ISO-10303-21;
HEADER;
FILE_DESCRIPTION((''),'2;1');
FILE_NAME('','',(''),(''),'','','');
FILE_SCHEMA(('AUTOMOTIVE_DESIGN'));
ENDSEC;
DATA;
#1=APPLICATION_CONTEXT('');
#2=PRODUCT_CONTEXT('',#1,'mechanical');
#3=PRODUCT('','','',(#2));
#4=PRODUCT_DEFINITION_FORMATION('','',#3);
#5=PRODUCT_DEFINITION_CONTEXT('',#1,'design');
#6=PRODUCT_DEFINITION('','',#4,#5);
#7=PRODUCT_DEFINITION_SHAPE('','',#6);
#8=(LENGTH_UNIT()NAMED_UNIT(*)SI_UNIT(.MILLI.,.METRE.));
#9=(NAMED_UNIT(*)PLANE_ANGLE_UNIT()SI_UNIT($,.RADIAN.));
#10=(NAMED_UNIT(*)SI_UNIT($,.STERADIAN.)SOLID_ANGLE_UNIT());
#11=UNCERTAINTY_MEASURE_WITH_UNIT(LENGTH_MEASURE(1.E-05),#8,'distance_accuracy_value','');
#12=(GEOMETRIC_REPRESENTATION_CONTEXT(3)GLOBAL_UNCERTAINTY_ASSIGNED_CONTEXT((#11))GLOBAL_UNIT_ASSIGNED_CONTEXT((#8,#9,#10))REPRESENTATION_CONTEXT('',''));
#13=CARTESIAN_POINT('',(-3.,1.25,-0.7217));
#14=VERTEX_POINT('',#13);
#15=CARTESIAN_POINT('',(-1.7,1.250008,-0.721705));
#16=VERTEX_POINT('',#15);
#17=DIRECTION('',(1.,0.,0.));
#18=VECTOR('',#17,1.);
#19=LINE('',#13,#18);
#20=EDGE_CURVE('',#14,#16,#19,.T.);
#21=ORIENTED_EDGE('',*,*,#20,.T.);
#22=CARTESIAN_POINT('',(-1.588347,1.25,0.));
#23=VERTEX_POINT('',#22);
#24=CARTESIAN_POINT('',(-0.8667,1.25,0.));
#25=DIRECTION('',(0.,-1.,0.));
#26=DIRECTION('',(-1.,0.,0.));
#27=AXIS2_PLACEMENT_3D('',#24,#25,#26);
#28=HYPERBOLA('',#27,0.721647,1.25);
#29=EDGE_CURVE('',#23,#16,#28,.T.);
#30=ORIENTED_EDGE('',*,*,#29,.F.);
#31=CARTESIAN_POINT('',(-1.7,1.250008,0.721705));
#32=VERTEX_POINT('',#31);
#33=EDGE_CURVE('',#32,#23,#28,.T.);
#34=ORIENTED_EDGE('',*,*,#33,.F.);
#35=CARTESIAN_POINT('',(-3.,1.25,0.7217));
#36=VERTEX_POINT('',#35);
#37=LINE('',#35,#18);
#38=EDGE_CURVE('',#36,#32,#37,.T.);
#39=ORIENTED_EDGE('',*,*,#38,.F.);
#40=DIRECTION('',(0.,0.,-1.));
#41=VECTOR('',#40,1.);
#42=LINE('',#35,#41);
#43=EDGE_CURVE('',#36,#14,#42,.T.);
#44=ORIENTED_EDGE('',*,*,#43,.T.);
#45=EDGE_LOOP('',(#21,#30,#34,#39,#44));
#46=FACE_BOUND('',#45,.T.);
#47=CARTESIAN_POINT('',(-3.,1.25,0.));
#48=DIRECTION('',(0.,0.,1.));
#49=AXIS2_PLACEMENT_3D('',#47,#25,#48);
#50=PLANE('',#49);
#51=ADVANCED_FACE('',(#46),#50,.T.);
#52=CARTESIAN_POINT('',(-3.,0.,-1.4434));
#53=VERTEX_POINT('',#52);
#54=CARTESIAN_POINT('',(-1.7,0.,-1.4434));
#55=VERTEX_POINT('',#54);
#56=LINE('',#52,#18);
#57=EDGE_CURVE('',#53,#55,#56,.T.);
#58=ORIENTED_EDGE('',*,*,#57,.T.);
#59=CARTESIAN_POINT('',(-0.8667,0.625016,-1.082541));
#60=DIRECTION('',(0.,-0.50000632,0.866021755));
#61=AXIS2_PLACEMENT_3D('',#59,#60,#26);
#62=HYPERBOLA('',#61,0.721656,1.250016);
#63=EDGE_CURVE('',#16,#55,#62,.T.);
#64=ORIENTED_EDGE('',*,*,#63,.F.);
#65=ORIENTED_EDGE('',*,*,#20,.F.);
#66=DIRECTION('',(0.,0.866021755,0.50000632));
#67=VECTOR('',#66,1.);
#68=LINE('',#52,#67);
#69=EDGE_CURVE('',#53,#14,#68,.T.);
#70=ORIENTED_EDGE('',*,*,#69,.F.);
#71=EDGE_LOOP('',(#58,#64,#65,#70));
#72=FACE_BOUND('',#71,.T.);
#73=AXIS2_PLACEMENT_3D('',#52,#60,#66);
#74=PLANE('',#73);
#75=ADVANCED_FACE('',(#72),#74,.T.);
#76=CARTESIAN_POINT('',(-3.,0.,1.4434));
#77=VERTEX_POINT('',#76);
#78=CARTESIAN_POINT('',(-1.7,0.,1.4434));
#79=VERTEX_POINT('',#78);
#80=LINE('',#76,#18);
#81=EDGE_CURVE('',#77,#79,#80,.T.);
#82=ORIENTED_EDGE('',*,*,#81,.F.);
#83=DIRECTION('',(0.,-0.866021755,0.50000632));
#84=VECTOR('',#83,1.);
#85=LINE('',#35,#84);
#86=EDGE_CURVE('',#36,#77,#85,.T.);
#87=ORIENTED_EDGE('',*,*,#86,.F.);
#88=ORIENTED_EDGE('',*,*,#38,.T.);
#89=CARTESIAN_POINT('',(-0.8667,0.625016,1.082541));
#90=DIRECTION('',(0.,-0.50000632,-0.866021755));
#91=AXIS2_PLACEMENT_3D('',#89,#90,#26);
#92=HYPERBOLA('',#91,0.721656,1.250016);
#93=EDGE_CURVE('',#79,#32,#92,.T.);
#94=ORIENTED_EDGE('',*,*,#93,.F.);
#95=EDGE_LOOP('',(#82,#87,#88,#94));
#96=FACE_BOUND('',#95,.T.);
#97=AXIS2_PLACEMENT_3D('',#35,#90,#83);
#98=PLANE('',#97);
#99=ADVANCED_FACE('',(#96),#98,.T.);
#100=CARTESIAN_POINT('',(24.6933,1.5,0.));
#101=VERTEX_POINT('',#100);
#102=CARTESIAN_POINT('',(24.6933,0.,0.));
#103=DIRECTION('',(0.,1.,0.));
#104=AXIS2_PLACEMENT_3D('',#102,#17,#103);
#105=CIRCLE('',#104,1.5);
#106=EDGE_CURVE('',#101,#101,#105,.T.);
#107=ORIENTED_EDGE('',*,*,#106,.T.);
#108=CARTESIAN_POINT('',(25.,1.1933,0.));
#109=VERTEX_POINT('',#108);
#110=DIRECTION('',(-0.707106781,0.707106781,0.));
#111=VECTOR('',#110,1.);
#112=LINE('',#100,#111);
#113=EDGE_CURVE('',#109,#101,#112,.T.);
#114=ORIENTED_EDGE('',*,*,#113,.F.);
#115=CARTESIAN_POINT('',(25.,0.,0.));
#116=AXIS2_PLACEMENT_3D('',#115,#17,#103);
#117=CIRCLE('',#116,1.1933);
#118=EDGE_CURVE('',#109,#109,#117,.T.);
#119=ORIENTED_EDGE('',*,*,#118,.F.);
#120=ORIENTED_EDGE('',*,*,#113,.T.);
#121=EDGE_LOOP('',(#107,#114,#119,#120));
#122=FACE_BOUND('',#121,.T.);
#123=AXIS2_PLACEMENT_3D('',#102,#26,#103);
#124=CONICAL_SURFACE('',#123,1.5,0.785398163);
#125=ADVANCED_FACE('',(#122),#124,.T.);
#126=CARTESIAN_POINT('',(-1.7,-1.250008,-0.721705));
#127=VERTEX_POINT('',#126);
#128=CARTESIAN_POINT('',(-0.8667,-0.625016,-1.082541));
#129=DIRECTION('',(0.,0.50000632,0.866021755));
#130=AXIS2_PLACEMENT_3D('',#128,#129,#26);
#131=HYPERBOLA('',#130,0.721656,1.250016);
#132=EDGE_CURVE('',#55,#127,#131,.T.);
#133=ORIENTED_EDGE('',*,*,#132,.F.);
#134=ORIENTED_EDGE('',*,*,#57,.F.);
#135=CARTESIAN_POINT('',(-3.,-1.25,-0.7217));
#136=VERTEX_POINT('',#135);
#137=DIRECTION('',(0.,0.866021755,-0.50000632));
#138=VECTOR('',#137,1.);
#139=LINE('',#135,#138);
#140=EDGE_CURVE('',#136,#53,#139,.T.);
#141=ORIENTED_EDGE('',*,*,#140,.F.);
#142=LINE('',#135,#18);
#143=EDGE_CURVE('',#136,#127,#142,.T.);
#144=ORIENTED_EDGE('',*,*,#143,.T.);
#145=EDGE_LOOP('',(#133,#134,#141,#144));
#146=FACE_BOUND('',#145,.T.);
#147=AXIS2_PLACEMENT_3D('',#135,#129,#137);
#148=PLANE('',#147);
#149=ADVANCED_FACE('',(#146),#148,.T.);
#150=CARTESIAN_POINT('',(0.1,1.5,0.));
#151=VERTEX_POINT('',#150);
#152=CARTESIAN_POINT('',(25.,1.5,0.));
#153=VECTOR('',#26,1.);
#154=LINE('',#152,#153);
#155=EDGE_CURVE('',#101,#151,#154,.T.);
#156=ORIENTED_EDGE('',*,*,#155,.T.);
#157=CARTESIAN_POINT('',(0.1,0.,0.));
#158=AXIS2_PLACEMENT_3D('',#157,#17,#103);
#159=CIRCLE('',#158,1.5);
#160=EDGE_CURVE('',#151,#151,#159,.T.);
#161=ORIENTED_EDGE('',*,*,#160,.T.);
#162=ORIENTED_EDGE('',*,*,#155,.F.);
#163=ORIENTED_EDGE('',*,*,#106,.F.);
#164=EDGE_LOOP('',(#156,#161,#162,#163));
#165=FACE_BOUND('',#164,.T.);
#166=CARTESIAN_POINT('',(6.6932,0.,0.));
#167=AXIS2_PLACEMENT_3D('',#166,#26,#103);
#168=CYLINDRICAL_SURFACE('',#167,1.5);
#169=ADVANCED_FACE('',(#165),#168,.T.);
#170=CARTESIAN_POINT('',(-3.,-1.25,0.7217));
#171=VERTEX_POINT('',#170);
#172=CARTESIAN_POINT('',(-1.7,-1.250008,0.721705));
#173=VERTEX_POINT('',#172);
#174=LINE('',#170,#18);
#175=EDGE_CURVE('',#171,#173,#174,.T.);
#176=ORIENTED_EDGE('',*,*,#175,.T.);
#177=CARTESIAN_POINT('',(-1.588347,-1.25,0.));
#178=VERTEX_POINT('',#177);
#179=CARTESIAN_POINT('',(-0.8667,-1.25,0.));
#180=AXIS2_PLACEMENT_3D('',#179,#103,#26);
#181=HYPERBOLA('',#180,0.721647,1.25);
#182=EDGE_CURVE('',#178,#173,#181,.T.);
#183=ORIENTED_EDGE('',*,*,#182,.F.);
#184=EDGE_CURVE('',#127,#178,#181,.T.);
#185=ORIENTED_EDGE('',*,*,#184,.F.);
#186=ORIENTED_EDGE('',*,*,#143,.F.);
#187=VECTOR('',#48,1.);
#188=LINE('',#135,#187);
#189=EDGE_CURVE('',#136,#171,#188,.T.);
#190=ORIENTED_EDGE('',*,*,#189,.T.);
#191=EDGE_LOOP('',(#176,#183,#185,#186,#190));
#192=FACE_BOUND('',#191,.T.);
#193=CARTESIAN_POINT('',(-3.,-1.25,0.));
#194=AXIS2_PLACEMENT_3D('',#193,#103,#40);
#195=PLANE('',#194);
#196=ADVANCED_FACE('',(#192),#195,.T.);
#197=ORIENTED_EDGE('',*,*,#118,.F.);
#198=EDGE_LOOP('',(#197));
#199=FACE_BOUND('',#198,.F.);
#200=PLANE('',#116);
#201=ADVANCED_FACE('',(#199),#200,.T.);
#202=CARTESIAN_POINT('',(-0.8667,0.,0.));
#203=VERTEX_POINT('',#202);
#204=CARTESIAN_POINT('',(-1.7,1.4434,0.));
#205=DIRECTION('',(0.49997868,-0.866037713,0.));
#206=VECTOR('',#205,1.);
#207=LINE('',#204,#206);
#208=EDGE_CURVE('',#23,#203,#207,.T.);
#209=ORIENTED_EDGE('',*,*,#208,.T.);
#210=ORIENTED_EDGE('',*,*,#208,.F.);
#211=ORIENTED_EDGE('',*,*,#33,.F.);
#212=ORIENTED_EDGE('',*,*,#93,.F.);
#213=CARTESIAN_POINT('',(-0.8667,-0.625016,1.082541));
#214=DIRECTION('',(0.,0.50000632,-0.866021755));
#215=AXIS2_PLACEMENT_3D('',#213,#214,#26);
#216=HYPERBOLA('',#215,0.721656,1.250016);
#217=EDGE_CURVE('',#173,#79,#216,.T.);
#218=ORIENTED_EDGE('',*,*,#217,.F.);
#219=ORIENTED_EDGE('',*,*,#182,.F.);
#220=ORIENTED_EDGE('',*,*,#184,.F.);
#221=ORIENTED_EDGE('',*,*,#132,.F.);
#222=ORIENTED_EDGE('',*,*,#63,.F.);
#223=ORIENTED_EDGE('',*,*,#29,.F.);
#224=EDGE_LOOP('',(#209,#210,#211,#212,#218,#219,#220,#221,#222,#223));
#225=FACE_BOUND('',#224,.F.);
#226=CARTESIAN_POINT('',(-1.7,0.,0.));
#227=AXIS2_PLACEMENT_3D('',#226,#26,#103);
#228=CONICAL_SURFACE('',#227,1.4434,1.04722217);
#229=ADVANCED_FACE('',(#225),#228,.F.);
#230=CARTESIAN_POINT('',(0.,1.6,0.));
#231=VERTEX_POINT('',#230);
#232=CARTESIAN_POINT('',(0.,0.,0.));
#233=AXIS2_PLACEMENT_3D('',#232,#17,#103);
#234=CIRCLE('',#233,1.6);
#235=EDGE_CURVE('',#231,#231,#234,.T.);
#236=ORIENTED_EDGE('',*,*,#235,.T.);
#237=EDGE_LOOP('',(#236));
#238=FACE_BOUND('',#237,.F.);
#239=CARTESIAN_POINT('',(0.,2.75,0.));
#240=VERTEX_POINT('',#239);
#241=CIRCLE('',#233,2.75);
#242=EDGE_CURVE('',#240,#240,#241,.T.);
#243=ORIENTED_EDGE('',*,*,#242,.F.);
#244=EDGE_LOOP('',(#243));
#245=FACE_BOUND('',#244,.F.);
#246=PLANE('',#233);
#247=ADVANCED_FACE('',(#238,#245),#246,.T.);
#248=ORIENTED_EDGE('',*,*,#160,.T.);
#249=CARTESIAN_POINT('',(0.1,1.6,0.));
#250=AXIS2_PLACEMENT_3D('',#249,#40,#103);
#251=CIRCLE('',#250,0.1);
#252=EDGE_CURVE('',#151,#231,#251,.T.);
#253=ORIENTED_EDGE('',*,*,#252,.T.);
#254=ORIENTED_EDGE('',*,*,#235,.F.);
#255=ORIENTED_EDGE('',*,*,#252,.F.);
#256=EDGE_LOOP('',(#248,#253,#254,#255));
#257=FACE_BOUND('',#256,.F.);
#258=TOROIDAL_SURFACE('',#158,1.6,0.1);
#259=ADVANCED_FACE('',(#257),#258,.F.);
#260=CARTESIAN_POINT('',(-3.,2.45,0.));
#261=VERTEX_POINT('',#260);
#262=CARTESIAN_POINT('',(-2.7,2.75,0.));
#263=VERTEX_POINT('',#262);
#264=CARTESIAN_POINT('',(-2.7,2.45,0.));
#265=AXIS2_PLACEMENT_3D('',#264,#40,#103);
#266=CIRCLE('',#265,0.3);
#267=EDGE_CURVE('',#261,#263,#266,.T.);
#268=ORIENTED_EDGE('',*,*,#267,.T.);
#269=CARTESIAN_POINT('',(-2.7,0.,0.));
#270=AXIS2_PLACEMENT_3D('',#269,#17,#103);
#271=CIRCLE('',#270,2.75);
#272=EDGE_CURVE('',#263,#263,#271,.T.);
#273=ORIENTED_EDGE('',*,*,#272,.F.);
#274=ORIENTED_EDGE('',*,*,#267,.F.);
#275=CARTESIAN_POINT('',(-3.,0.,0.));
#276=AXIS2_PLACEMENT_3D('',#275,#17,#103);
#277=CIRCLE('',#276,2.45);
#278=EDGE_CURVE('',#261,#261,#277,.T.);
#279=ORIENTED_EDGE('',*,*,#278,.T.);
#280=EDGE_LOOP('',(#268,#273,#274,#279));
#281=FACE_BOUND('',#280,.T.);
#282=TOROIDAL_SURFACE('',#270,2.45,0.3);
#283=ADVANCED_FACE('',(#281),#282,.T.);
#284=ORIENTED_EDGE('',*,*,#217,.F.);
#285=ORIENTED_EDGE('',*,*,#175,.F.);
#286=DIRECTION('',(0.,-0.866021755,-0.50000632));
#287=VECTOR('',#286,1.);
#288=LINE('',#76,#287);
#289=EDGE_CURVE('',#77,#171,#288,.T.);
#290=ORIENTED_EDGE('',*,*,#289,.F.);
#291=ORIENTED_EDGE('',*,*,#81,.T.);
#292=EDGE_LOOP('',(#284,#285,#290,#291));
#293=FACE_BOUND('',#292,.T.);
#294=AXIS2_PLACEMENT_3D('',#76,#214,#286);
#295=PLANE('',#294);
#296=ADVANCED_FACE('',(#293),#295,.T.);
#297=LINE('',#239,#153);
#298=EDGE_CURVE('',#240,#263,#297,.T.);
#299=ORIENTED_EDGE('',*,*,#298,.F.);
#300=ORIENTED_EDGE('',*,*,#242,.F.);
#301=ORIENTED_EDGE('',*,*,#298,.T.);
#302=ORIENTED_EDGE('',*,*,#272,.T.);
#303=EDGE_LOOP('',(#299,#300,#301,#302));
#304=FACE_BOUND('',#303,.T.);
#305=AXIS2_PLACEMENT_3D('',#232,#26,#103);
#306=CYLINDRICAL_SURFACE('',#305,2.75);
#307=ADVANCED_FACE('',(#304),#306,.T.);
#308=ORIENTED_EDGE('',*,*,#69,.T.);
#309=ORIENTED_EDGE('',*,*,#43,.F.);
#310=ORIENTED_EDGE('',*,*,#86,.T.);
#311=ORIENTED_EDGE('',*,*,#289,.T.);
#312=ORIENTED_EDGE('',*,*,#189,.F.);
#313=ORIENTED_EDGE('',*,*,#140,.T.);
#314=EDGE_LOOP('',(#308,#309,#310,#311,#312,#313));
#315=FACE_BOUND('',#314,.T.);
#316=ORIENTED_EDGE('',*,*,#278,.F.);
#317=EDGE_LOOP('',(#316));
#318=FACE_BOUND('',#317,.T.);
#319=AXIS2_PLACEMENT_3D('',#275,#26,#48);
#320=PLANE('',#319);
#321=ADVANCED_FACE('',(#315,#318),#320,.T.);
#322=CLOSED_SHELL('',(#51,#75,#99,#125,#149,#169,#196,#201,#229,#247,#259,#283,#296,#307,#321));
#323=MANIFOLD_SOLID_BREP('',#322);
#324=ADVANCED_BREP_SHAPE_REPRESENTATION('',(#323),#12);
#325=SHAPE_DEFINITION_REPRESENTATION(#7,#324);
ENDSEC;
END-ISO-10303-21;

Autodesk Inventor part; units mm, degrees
ref_plane "YZ Plane" through (0, 0, 0) normal (1, 0, 0) x (0, 1, 0)
ref_plane "XZ Plane" through (0, 0, 0) normal (0, 1, 0) x (-1, 0, 0)
sketch "Sketch1" plane through (0, 0, 0) normal (0, 0, 1) x (1, 0, 0)
  line L0 (-0.8667, 0) -> (25, 0)
  line L1 (25, 0) -> (25, 1.5)
  line L2 (25, 1.5) -> (7, 1.5)
  line L3 (7, 1.5) -> (6.6932, 1.5)
  line L4 (6.6932, 1.5) -> (0, 1.5)
  line L5 (0, 1.5) -> (0, 2.75)
  line L6 (0, 2.75) -> (-3, 2.75)
  line L7 (-3, 2.75) -> (-3, 1.4434)
  line L8 (-3, 1.4434) -> (-1.7, 1.4434)
  line L9 (-1.7, 1.4434) -> (-0.8667, 0)
  line L10 (-8.6, 0) -> (30.6, 0) projected
  line L11 (0, -0.55) -> (0, 3.3) projected
  line L12 (7, 1.5) -> (0, 1.5) construction
  dimension "d1" = 18
  dimension "d2" = 0.3068
  dimension "d3" = 3
  dimension "d4" = 1.3
  dimension "d5" = 60
  dimension "d6" = 3
  dimension "d7" = 3
  dimension "d8" = 2.8868
  dimension "d9" = 5.5
  dimension "d26" = 25
revolve "Body" add sketch "Sketch1" angle 360 about axis through (-0.8667, 0, 0) along (1, 0, 0)
sketch "Sketch2" plane through (-3, 0, 0) normal (-1, 0, 0) x (0, 0, 1)
  circle A0 centre (0, 0) radius 1.4434 projected
  line L0 (0, -3.85) -> (0, 3.85) projected
  line L1 (-3.85, 0) -> (3.85, 0) projected
  line L2 (1.4434, 0) -> (0.7217, -1.25)
  line L3 (0.7217, -1.25) -> (-0.7217, -1.25)
  line L4 (-0.7217, -1.25) -> (-1.4434, 0)
  line L5 (-1.4434, 0) -> (-0.7217, 1.25)
  line L6 (-0.7217, 1.25) -> (0.7217, 1.25)
  line L7 (0.7217, 1.25) -> (1.4434, 0)
extrude "Slot" add sketch "Sketch2" against normal up to next contours L7 A0 | A0 L2 | L6 L0 A0 | A0 L0 L3 | L0 L6 A0 | A0 L3 L0 | L4 A0 | A0 L5
fillet "Fillet1" radius 0.3 1 edges at (-3, -2.75, 0)
thread "Thread" size "M3x0.5" class "6g" standard "ISO Metric profile" length 18
chamfer "Chamfer1" distance 0.3067 distance2 0.3067 1 edges at (25, -1.5, 0) measured on face at (25, 0.2885, 0.9187)
ref_plane "Work Plane1" through (29, 0, 0) normal (0, -1, 0) x (1, 0, 0)
fillet "Fillet2" radius 0.1 1 edges at (0, -1.5, 0)
equation "\"d1\" = GEL"
equation "\"d3\" = KOH"
equation "\"d4\" = INTI"
equation "\"d6\" = GD"
equation "\"d7\" = BDM"
equation "\"d8\" = 1.1547 * SW"
equation "\"d9\" = KOD"
equation "\"d26\" = NLG"
equation "\"d17\" = RR"
equation "\"d13\" = GEL"
equation "\"d15\" = -0.5 * SPD + 0.5 * GD"
equation "\"d16\" = GUL"
equation "\"d30\" = R"
equation "\"GD\" = 3"
equation "\"NLG\" = 25"
equation "\"GEL\" = 18"
equation "\"KOD\" = 5.5"
equation "\"KOH\" = 3"
equation "\"INTI\" = 1.3"
equation "\"GAL\" = 0.61345 * PTC"
equation "\"GUL\" = 0.61345 * PTC"
equation "\"BDM\" = NND"
equation "\"SW\" = 2.5"
equation "\"RR\" = 0.3"
equation "\"SPD\" = NND - 1.2269 * PTC"
equation "\"R\" = 0.1"
equation "\"TOA\" = 30deg"
equation "\"GD1\" = THREADDIA - 1.2269 * PTC"
equation "\"THREADDIA\" = 3"
equation "\"FAWI\" = 45deg"
equation "\"PTC\" = 0.5"
equation "\"NND\" = 3"
equation "\"E0\" = 1.155 * SW"
properties part number "ISO 4762 - M3 x 25" material "ステンレス鋼 440C"
